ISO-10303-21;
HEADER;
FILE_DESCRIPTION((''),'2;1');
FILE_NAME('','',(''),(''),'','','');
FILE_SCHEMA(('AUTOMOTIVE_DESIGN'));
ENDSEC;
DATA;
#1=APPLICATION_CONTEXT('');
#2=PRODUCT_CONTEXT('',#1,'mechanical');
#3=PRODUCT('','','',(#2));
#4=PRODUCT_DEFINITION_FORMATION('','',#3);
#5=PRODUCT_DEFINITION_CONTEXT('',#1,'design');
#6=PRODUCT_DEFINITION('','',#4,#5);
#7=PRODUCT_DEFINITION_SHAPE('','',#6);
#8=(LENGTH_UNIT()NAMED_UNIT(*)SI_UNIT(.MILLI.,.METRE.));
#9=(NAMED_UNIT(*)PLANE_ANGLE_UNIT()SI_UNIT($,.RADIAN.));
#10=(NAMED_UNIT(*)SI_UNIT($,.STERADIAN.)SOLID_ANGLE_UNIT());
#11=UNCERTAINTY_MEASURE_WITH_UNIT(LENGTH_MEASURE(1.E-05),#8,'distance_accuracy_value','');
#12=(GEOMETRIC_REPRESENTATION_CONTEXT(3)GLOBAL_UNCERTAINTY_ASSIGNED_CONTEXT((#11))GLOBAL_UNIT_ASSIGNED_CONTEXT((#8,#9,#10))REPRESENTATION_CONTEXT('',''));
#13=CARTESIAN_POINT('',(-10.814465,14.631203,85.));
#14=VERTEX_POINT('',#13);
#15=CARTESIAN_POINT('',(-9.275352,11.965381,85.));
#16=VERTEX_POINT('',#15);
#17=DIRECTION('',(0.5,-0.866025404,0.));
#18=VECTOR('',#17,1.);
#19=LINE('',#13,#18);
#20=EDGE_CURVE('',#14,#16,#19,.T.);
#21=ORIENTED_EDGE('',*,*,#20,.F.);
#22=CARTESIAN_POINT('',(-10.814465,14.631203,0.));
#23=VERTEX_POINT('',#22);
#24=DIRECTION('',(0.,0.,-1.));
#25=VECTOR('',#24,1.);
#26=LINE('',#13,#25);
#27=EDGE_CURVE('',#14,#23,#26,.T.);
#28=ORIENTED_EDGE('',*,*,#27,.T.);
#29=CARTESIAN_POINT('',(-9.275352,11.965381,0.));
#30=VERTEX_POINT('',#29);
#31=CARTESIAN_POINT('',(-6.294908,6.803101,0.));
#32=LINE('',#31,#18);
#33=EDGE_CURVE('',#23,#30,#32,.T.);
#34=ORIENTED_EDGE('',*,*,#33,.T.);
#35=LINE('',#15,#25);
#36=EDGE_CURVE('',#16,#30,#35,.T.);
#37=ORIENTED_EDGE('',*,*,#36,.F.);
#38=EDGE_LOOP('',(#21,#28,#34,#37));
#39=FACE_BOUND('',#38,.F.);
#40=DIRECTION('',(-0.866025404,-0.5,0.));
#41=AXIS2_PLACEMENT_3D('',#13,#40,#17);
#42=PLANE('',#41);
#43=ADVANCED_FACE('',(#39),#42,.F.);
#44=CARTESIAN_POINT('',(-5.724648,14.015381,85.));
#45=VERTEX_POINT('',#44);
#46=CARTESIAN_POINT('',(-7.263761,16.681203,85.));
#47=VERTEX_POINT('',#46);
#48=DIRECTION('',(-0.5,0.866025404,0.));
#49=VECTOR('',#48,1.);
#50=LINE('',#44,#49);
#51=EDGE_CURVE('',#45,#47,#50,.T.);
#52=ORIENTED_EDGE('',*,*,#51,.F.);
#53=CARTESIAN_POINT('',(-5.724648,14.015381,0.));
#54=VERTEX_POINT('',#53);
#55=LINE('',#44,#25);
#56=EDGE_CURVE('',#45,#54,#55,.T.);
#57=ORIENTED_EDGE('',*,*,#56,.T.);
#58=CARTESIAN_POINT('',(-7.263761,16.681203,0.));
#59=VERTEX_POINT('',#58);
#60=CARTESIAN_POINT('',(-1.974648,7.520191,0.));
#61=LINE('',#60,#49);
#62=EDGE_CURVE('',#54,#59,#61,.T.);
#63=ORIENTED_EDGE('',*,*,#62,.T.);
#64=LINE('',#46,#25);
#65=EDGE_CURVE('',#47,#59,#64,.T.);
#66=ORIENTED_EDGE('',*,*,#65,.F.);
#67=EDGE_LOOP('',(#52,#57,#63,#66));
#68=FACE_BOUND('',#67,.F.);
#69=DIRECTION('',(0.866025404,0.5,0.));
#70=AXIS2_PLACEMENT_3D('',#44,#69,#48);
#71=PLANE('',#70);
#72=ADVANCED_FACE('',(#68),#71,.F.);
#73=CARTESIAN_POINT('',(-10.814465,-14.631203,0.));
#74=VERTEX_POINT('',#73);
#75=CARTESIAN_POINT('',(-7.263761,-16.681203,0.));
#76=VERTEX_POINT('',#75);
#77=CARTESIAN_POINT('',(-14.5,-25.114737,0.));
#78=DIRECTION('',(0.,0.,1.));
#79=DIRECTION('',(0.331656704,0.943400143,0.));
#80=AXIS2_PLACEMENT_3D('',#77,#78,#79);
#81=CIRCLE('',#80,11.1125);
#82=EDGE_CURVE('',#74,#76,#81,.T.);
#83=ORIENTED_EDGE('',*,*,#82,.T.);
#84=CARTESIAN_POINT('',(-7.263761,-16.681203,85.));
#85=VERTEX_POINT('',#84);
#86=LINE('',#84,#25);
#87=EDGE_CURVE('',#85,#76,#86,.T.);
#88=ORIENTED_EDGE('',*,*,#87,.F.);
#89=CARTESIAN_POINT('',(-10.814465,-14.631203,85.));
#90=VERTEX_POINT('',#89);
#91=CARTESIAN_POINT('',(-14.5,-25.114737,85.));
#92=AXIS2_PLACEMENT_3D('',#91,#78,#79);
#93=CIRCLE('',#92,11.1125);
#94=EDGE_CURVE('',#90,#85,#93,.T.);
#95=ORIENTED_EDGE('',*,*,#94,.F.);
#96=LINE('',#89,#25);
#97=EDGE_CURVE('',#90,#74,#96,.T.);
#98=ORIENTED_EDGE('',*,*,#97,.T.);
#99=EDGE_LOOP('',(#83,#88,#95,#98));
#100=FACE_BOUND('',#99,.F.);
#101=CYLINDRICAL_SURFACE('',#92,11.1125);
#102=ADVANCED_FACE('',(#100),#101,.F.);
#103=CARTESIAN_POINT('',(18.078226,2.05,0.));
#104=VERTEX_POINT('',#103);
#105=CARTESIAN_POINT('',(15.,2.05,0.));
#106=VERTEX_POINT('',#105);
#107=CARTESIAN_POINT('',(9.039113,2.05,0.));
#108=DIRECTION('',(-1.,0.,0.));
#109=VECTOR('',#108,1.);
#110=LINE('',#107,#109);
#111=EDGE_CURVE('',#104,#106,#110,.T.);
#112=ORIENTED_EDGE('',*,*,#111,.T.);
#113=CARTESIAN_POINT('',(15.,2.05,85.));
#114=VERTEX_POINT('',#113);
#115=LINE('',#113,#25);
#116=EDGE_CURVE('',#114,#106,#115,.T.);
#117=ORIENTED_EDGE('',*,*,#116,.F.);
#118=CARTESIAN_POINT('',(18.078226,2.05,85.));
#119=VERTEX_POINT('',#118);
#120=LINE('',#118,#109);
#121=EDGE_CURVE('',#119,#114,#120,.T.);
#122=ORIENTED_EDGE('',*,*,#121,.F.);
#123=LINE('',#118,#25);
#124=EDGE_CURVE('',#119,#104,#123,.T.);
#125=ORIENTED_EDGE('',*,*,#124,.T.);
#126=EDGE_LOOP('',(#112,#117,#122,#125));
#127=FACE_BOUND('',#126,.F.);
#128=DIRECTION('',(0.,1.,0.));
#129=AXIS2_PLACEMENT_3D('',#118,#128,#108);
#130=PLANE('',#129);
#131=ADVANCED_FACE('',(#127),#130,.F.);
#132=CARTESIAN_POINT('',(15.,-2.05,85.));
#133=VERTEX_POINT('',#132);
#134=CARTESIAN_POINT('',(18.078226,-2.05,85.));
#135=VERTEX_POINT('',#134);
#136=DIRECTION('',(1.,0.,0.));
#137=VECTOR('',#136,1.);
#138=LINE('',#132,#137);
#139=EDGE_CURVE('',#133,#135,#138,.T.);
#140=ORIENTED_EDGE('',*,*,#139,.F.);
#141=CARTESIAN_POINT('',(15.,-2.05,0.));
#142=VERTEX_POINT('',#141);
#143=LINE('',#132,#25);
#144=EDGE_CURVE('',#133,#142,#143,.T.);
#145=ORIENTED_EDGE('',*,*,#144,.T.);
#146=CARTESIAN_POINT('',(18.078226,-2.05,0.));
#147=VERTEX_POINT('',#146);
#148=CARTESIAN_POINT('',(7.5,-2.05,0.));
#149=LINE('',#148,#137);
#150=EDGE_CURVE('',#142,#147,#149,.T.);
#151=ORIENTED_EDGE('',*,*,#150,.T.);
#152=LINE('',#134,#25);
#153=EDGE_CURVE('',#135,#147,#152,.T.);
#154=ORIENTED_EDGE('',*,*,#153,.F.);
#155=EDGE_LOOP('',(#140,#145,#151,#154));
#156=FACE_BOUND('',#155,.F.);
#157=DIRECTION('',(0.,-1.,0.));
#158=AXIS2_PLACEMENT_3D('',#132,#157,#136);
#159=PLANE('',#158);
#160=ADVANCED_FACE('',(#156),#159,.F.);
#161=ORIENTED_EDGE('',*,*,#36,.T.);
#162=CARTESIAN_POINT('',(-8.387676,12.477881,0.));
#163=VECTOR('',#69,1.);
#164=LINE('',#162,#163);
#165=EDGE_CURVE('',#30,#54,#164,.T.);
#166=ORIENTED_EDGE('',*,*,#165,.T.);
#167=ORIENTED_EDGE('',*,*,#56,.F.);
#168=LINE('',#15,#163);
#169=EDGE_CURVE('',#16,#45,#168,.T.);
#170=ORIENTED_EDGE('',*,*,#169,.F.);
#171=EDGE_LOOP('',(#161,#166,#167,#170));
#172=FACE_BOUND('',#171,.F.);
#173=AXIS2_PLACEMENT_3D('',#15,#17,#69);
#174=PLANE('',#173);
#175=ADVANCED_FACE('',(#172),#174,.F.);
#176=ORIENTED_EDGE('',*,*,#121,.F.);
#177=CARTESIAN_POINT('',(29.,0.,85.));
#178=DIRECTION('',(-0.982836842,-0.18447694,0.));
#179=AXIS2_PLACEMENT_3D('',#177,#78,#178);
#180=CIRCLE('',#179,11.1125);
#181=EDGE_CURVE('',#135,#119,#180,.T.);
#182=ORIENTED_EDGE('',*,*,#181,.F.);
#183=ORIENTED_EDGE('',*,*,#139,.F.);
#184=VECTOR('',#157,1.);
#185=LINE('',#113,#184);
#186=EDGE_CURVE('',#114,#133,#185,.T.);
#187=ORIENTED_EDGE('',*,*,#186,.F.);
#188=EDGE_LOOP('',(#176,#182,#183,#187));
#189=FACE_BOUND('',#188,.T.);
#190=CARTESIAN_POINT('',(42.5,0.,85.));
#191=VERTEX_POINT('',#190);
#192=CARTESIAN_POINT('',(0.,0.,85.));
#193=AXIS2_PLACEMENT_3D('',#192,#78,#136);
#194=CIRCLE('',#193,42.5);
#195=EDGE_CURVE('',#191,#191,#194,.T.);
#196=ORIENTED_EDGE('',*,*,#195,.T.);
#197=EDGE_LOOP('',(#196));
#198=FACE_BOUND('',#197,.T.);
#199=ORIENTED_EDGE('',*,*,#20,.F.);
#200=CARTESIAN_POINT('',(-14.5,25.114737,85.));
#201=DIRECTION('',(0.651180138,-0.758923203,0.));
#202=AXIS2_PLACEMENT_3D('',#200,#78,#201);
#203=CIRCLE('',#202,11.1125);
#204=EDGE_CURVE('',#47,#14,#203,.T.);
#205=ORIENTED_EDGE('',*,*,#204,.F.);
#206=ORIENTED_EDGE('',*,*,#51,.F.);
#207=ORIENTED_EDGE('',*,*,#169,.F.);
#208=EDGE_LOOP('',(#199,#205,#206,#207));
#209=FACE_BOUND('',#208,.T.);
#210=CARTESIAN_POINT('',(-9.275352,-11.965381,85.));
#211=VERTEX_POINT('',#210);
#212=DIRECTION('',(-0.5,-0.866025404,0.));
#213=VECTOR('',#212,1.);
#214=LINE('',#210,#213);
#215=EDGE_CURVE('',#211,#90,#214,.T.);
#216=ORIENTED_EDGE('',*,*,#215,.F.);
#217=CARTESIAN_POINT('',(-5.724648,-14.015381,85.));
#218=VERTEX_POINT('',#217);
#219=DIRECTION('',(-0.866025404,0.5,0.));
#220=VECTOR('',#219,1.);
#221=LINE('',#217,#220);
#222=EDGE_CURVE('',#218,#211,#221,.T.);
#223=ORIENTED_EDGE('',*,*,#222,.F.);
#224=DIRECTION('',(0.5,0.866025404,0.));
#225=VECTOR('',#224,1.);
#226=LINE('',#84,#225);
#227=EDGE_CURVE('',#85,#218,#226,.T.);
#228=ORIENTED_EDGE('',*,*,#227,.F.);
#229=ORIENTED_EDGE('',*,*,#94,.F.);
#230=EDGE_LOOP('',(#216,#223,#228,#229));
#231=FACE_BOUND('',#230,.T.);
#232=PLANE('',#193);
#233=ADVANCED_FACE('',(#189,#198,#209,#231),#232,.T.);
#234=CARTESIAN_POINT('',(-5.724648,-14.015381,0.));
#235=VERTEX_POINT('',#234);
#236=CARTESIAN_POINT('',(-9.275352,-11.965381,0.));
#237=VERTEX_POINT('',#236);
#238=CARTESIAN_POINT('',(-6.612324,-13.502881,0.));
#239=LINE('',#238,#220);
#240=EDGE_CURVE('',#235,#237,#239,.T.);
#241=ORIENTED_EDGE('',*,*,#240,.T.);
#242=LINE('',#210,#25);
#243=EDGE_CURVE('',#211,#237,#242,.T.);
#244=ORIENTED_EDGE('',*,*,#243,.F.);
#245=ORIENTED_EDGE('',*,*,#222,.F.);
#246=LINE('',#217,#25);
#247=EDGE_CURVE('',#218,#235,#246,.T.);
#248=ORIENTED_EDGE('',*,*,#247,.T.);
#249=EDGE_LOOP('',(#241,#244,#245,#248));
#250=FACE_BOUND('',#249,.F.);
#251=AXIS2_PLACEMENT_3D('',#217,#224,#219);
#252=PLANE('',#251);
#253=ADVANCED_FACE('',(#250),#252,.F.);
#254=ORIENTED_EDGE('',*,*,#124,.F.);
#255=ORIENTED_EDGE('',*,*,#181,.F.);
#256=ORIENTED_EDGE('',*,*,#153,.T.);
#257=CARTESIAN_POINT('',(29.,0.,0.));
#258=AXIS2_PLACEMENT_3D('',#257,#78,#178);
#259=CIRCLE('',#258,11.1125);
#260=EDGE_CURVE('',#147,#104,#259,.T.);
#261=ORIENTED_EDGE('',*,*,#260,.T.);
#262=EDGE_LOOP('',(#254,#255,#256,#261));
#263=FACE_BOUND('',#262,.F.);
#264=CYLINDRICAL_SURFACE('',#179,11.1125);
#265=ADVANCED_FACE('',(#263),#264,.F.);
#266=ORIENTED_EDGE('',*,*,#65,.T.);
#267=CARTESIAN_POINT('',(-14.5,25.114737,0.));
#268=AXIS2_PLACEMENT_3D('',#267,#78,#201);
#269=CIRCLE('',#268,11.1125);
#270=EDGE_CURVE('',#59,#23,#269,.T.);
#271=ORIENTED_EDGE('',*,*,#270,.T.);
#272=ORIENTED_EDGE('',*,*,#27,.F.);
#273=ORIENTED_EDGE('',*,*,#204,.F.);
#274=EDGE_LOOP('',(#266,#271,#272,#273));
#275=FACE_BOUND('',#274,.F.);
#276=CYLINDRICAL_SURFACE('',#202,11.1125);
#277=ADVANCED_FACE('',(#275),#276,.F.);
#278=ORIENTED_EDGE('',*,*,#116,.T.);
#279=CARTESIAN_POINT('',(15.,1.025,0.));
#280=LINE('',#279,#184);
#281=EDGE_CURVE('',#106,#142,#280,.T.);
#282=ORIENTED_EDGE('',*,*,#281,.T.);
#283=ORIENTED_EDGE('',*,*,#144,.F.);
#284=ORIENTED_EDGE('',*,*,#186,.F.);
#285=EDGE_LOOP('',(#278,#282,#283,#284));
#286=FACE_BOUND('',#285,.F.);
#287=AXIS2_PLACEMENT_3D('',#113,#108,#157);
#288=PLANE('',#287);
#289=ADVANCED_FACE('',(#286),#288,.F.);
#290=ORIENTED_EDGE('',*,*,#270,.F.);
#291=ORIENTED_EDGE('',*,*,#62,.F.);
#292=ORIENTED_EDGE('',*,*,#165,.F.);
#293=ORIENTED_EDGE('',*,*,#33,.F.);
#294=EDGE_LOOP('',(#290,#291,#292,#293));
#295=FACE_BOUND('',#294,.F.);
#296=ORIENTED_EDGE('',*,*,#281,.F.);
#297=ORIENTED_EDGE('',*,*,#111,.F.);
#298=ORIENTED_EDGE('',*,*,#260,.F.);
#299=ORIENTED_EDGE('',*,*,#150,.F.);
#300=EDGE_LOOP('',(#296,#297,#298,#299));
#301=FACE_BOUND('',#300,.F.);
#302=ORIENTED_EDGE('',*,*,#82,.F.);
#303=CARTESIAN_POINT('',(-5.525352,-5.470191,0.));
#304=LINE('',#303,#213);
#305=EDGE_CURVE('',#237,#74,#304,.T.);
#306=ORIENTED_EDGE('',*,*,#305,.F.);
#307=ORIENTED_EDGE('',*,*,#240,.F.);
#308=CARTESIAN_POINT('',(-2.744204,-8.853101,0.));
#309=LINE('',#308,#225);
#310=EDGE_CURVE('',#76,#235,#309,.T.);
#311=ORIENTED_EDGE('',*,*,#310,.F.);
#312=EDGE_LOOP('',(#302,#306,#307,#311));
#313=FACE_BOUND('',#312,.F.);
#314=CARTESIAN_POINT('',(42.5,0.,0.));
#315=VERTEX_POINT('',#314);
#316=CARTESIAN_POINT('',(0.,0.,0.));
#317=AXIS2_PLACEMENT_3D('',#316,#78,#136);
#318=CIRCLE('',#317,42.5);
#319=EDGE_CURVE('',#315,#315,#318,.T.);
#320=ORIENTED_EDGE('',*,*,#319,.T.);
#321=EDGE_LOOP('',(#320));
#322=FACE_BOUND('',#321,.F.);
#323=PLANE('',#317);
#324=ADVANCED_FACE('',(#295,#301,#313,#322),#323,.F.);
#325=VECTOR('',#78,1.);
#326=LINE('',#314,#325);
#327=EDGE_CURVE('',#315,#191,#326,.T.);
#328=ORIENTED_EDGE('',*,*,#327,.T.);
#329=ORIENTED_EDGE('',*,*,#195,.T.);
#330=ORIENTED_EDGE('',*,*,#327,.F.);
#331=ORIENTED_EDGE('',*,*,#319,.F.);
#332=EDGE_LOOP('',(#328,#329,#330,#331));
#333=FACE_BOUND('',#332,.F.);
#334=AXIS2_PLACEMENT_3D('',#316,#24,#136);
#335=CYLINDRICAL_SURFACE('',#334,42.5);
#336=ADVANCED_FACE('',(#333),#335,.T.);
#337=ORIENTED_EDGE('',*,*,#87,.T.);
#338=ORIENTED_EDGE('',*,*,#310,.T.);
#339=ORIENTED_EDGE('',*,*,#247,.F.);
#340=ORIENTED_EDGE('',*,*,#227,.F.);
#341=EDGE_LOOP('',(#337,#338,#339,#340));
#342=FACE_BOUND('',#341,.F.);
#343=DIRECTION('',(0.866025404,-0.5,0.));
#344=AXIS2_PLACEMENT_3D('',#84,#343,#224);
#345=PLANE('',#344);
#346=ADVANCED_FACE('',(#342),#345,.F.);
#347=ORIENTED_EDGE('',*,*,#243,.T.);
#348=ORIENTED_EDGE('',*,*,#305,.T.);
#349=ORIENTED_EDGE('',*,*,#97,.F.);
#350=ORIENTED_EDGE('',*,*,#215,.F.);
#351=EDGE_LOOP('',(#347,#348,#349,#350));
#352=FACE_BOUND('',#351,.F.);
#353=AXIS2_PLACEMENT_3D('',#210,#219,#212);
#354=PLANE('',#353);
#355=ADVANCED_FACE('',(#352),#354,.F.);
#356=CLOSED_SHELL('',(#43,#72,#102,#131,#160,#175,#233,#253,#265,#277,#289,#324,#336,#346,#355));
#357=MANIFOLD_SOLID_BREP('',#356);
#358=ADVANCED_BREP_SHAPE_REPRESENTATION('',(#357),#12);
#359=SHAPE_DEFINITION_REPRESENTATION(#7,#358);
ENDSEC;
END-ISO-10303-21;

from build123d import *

# Parameters (mm, degrees)
F0_R            = 42.5
F1_DEPTH        = 85
F3_DEPTH        = 85.001
F3_COPIES_COUNT = 3


# Not quite as in the source:
# - a pattern or mirror of a feature is missing from the dataset's text; its kind, count and spacing are read off the source's solid


with BuildPart() as f1:
    # F0 (on Top) → F1 (new body)
    with BuildSketch(Plane.XY):
        Circle(F0_R)
    extrude(amount=F1_DEPTH)

    # F2 (on face) → F3 (cut, through all)
    with BuildSketch(Plane.XY.offset(85)):
        with BuildLine():
            Line((15, -2.05), (18.0782255906, -2.05))
            ThreePointArc((18.0782255906, -2.05), (40.1125, 0), (18.0782255906, 2.05))
            Line((18.0782255906, 2.05), (15, 2.05))
            Line((15, 2.05), (15, -2.05))
        make_face()
    f3 = extrude(amount=-F3_DEPTH, mode=Mode.SUBTRACT)

    # F3_copies: F3 ×3 about axis
    f3_copies_axis = Axis((0, 0, 0), (0, 0, 1))
    for i in range(1, F3_COPIES_COUNT):
        add(f3.rotate(f3_copies_axis, i * 360 / F3_COPIES_COUNT), mode=Mode.SUBTRACT)


solid = f1.part
